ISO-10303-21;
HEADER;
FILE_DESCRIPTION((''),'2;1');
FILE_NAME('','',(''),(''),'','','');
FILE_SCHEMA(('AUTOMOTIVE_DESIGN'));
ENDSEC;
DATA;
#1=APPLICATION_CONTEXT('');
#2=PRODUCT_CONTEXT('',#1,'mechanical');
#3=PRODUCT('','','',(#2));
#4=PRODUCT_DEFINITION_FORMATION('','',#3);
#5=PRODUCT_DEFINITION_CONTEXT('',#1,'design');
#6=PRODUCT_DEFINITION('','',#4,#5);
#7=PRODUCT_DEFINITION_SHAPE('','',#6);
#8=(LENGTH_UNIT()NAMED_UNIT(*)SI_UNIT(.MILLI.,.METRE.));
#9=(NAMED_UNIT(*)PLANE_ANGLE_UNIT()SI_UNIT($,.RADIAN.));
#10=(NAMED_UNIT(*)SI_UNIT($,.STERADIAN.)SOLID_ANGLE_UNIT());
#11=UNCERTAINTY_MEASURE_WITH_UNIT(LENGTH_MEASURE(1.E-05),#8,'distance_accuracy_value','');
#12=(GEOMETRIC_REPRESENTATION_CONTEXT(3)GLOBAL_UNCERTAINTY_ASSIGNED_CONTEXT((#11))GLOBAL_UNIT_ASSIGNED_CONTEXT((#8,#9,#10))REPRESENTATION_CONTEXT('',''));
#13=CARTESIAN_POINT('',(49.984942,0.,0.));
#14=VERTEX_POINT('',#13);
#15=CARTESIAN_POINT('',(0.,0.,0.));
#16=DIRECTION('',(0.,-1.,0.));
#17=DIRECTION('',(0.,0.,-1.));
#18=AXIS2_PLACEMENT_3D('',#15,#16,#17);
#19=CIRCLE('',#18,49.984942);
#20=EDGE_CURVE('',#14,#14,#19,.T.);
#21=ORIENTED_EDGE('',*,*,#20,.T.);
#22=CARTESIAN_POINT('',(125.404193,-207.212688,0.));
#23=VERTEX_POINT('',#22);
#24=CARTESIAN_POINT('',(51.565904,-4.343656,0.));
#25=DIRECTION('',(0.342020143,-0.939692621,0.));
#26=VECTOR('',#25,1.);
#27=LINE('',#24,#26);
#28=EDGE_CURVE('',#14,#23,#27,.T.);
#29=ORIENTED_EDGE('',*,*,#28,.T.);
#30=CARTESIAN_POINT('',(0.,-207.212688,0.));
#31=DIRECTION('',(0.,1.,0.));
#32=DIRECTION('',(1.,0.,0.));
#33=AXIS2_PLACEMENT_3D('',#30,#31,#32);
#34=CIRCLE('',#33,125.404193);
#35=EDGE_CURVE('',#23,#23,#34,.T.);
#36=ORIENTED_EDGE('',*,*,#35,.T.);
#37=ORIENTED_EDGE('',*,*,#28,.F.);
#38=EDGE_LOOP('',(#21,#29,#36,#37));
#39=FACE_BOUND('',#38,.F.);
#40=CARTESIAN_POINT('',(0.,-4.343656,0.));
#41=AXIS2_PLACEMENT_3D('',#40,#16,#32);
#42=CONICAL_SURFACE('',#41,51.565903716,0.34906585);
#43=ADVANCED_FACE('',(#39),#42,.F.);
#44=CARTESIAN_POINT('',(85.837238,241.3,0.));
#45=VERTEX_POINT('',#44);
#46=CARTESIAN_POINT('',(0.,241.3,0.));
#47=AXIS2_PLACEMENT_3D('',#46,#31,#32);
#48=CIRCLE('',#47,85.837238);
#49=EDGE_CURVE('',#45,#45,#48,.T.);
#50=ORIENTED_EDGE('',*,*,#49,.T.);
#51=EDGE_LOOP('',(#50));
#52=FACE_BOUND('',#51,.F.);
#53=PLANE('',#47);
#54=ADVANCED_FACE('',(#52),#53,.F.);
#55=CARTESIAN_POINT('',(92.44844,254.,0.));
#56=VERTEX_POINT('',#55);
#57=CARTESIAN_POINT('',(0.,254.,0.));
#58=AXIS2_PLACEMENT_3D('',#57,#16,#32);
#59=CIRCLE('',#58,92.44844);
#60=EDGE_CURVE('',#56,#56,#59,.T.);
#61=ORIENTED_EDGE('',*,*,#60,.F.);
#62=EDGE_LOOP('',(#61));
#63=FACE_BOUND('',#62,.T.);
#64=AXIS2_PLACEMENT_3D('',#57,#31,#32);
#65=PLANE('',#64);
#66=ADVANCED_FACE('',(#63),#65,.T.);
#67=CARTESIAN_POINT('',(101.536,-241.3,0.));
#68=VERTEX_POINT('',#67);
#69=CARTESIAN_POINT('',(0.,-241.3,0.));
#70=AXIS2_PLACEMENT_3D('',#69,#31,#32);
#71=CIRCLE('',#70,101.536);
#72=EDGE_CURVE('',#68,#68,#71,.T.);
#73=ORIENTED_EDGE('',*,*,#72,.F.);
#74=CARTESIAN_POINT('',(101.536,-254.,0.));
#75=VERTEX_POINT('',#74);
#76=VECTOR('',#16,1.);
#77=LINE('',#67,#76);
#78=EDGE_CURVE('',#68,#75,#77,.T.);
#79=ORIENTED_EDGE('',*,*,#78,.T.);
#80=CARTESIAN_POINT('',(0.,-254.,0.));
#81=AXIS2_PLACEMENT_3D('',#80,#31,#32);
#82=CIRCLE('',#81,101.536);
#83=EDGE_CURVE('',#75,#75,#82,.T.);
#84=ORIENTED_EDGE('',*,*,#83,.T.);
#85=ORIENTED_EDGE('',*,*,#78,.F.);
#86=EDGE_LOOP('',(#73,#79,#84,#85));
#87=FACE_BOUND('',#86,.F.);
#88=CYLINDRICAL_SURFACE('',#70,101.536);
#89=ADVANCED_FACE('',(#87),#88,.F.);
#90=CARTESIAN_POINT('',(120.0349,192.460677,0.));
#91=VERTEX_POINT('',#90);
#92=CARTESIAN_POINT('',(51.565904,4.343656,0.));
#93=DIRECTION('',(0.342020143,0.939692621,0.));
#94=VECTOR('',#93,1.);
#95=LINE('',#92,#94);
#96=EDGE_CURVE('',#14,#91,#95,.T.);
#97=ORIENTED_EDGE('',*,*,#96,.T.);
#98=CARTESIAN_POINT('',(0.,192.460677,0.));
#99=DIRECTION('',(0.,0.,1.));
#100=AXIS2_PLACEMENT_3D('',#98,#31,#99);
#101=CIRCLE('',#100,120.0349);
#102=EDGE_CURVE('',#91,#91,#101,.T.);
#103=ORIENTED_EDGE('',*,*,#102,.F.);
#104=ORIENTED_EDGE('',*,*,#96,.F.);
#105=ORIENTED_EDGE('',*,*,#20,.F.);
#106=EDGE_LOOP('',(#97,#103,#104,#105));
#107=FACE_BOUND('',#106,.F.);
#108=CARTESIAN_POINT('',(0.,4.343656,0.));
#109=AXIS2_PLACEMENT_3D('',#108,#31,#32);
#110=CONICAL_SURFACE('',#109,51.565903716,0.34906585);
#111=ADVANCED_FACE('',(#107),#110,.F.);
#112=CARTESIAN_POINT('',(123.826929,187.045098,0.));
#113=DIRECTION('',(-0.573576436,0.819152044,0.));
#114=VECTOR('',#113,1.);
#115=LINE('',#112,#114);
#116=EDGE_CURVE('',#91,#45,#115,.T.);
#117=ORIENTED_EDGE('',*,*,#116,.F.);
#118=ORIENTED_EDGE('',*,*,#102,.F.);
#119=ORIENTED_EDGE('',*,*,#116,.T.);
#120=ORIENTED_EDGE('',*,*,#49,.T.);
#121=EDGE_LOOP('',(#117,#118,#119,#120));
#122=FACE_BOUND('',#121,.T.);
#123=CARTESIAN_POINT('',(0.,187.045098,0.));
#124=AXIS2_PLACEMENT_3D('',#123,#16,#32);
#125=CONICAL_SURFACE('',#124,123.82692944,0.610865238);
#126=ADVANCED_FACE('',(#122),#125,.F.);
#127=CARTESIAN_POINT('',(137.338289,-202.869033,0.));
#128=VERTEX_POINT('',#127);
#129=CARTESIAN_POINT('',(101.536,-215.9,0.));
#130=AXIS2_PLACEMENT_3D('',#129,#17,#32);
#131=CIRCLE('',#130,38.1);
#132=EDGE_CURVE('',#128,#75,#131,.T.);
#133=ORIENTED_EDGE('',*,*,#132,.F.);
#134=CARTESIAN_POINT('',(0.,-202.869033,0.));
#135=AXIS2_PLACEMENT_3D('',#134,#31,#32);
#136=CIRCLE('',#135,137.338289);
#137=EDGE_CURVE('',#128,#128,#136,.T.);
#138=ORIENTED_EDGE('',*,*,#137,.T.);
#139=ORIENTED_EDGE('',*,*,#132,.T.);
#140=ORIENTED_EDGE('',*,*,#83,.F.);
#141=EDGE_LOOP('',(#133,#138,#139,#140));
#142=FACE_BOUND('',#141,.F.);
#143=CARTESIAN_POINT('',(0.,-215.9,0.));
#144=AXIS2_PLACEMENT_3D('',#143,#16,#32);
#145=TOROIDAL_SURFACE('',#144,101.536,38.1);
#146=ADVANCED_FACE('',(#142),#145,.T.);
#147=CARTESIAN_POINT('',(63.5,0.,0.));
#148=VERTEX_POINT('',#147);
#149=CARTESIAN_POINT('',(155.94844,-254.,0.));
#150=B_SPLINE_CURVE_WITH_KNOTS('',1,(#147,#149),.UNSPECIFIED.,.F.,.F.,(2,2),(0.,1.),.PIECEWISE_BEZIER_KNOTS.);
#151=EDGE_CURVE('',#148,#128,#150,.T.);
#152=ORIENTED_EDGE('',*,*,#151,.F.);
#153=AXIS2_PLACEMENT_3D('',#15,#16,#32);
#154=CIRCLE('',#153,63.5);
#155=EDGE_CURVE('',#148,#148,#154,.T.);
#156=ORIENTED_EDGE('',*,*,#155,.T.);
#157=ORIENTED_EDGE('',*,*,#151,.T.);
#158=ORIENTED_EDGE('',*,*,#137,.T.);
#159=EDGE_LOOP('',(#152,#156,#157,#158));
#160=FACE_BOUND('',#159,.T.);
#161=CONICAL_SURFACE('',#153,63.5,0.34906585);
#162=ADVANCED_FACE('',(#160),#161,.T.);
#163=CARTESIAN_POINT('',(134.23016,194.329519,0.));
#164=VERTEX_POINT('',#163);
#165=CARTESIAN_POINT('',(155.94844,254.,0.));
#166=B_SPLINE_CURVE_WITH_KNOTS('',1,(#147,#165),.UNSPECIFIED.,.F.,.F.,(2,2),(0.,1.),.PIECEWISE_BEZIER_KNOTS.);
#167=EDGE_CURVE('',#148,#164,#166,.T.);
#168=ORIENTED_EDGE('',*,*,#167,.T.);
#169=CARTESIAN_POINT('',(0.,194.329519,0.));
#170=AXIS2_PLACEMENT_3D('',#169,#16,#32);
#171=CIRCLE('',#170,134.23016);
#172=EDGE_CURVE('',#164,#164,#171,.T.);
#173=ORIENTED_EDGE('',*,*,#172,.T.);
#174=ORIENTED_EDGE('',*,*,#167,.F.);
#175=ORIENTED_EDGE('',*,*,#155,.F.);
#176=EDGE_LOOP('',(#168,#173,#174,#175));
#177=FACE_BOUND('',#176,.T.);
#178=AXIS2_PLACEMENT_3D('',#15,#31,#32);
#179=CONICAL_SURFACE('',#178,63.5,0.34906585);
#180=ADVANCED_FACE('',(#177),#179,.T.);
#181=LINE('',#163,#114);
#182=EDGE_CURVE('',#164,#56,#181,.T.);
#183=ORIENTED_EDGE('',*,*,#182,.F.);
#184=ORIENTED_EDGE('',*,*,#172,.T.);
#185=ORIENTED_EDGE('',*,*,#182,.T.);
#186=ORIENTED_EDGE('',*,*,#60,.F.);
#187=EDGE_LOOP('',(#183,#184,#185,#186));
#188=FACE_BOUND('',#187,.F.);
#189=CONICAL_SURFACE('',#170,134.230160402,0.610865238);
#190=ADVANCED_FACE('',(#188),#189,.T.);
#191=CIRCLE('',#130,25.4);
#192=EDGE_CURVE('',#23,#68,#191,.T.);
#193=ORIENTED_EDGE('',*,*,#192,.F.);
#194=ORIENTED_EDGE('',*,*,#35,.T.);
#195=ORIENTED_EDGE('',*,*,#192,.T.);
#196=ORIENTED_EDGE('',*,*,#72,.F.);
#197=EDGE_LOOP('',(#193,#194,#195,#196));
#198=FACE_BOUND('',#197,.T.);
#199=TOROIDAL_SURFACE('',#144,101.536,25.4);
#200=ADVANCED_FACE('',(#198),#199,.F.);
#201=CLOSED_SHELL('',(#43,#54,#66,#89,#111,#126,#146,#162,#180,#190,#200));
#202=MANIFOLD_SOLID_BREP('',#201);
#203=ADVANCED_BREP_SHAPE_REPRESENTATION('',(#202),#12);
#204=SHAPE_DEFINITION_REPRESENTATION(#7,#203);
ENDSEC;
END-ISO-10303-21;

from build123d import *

# Parameters (mm, degrees)
F0_R      = 63.5
F1_DEPTH  = 254
F1_TAPER  = -20
F1_FACE_R = 63.5
F2_DEPTH  = 254
F2_TAPER  = -20
F3_R      = 38.1
F5_T      = -12.7


# Not quite as in the source:
# - a fillet or chamfer that OpenCascade refuses, or shapes differently, is made with other operations: its cross-section is extruded or revolved along the edge and cut away or added
# - a shell that OpenCascade refuses in one call is made with other operations: the cavity is built on its own and cut out


with BuildPart() as f1:
    # F0 (on Front) → F1 (new body)
    with BuildSketch(Plane.XZ):
        Circle(F0_R)
    extrude(amount=F1_DEPTH, taper=F1_TAPER)

    # F1_face (on face) → F2 (join)
    with BuildSketch(Plane(origin=(0, 0, 0), x_dir=(1, 0, 0), z_dir=(0, 1, 0))):
        Circle(F1_FACE_R)
    extrude(amount=F2_DEPTH, taper=F2_TAPER)

    # F3
    f3_edges = [f1.edges().sort_by_distance(p)[0] for p in [
        (-155.94844, -254, 0),
    ]]
    fillet(f3_edges, radius=F3_R)

    # F4: chamfer of 63.5 on 1 edges, made by hand

    # F4_s1 → F4_t2 (revolve, cut)
    with BuildSketch(Plane.XY):
        Polygon((134.2301604024, 194.3295185801), (92.4484395036, 254), (155.9484395036, 254), align=None)
    revolve(axis=Axis((0, 254, 0), (0, -1, 0)), mode=Mode.SUBTRACT)

    # F5: a shell. OpenCascade refuses it in one call, so the cavity is built on its own and cut out:
    # the body offset inwards by the wall thickness, plus a prism from it out through each open face.
    f5_core = offset(f1.part, amount=F5_T, kind=Kind.INTERSECTION, mode=Mode.PRIVATE)
    f5_exits = [f5_core.faces().sort_by_distance(p)[0] for p in [
        (0, -241.3, 0),
    ]]
    add(f5_core, mode=Mode.SUBTRACT)
    extrude(f5_exits, amount=-F5_T, mode=Mode.SUBTRACT)


solid = f1.part
